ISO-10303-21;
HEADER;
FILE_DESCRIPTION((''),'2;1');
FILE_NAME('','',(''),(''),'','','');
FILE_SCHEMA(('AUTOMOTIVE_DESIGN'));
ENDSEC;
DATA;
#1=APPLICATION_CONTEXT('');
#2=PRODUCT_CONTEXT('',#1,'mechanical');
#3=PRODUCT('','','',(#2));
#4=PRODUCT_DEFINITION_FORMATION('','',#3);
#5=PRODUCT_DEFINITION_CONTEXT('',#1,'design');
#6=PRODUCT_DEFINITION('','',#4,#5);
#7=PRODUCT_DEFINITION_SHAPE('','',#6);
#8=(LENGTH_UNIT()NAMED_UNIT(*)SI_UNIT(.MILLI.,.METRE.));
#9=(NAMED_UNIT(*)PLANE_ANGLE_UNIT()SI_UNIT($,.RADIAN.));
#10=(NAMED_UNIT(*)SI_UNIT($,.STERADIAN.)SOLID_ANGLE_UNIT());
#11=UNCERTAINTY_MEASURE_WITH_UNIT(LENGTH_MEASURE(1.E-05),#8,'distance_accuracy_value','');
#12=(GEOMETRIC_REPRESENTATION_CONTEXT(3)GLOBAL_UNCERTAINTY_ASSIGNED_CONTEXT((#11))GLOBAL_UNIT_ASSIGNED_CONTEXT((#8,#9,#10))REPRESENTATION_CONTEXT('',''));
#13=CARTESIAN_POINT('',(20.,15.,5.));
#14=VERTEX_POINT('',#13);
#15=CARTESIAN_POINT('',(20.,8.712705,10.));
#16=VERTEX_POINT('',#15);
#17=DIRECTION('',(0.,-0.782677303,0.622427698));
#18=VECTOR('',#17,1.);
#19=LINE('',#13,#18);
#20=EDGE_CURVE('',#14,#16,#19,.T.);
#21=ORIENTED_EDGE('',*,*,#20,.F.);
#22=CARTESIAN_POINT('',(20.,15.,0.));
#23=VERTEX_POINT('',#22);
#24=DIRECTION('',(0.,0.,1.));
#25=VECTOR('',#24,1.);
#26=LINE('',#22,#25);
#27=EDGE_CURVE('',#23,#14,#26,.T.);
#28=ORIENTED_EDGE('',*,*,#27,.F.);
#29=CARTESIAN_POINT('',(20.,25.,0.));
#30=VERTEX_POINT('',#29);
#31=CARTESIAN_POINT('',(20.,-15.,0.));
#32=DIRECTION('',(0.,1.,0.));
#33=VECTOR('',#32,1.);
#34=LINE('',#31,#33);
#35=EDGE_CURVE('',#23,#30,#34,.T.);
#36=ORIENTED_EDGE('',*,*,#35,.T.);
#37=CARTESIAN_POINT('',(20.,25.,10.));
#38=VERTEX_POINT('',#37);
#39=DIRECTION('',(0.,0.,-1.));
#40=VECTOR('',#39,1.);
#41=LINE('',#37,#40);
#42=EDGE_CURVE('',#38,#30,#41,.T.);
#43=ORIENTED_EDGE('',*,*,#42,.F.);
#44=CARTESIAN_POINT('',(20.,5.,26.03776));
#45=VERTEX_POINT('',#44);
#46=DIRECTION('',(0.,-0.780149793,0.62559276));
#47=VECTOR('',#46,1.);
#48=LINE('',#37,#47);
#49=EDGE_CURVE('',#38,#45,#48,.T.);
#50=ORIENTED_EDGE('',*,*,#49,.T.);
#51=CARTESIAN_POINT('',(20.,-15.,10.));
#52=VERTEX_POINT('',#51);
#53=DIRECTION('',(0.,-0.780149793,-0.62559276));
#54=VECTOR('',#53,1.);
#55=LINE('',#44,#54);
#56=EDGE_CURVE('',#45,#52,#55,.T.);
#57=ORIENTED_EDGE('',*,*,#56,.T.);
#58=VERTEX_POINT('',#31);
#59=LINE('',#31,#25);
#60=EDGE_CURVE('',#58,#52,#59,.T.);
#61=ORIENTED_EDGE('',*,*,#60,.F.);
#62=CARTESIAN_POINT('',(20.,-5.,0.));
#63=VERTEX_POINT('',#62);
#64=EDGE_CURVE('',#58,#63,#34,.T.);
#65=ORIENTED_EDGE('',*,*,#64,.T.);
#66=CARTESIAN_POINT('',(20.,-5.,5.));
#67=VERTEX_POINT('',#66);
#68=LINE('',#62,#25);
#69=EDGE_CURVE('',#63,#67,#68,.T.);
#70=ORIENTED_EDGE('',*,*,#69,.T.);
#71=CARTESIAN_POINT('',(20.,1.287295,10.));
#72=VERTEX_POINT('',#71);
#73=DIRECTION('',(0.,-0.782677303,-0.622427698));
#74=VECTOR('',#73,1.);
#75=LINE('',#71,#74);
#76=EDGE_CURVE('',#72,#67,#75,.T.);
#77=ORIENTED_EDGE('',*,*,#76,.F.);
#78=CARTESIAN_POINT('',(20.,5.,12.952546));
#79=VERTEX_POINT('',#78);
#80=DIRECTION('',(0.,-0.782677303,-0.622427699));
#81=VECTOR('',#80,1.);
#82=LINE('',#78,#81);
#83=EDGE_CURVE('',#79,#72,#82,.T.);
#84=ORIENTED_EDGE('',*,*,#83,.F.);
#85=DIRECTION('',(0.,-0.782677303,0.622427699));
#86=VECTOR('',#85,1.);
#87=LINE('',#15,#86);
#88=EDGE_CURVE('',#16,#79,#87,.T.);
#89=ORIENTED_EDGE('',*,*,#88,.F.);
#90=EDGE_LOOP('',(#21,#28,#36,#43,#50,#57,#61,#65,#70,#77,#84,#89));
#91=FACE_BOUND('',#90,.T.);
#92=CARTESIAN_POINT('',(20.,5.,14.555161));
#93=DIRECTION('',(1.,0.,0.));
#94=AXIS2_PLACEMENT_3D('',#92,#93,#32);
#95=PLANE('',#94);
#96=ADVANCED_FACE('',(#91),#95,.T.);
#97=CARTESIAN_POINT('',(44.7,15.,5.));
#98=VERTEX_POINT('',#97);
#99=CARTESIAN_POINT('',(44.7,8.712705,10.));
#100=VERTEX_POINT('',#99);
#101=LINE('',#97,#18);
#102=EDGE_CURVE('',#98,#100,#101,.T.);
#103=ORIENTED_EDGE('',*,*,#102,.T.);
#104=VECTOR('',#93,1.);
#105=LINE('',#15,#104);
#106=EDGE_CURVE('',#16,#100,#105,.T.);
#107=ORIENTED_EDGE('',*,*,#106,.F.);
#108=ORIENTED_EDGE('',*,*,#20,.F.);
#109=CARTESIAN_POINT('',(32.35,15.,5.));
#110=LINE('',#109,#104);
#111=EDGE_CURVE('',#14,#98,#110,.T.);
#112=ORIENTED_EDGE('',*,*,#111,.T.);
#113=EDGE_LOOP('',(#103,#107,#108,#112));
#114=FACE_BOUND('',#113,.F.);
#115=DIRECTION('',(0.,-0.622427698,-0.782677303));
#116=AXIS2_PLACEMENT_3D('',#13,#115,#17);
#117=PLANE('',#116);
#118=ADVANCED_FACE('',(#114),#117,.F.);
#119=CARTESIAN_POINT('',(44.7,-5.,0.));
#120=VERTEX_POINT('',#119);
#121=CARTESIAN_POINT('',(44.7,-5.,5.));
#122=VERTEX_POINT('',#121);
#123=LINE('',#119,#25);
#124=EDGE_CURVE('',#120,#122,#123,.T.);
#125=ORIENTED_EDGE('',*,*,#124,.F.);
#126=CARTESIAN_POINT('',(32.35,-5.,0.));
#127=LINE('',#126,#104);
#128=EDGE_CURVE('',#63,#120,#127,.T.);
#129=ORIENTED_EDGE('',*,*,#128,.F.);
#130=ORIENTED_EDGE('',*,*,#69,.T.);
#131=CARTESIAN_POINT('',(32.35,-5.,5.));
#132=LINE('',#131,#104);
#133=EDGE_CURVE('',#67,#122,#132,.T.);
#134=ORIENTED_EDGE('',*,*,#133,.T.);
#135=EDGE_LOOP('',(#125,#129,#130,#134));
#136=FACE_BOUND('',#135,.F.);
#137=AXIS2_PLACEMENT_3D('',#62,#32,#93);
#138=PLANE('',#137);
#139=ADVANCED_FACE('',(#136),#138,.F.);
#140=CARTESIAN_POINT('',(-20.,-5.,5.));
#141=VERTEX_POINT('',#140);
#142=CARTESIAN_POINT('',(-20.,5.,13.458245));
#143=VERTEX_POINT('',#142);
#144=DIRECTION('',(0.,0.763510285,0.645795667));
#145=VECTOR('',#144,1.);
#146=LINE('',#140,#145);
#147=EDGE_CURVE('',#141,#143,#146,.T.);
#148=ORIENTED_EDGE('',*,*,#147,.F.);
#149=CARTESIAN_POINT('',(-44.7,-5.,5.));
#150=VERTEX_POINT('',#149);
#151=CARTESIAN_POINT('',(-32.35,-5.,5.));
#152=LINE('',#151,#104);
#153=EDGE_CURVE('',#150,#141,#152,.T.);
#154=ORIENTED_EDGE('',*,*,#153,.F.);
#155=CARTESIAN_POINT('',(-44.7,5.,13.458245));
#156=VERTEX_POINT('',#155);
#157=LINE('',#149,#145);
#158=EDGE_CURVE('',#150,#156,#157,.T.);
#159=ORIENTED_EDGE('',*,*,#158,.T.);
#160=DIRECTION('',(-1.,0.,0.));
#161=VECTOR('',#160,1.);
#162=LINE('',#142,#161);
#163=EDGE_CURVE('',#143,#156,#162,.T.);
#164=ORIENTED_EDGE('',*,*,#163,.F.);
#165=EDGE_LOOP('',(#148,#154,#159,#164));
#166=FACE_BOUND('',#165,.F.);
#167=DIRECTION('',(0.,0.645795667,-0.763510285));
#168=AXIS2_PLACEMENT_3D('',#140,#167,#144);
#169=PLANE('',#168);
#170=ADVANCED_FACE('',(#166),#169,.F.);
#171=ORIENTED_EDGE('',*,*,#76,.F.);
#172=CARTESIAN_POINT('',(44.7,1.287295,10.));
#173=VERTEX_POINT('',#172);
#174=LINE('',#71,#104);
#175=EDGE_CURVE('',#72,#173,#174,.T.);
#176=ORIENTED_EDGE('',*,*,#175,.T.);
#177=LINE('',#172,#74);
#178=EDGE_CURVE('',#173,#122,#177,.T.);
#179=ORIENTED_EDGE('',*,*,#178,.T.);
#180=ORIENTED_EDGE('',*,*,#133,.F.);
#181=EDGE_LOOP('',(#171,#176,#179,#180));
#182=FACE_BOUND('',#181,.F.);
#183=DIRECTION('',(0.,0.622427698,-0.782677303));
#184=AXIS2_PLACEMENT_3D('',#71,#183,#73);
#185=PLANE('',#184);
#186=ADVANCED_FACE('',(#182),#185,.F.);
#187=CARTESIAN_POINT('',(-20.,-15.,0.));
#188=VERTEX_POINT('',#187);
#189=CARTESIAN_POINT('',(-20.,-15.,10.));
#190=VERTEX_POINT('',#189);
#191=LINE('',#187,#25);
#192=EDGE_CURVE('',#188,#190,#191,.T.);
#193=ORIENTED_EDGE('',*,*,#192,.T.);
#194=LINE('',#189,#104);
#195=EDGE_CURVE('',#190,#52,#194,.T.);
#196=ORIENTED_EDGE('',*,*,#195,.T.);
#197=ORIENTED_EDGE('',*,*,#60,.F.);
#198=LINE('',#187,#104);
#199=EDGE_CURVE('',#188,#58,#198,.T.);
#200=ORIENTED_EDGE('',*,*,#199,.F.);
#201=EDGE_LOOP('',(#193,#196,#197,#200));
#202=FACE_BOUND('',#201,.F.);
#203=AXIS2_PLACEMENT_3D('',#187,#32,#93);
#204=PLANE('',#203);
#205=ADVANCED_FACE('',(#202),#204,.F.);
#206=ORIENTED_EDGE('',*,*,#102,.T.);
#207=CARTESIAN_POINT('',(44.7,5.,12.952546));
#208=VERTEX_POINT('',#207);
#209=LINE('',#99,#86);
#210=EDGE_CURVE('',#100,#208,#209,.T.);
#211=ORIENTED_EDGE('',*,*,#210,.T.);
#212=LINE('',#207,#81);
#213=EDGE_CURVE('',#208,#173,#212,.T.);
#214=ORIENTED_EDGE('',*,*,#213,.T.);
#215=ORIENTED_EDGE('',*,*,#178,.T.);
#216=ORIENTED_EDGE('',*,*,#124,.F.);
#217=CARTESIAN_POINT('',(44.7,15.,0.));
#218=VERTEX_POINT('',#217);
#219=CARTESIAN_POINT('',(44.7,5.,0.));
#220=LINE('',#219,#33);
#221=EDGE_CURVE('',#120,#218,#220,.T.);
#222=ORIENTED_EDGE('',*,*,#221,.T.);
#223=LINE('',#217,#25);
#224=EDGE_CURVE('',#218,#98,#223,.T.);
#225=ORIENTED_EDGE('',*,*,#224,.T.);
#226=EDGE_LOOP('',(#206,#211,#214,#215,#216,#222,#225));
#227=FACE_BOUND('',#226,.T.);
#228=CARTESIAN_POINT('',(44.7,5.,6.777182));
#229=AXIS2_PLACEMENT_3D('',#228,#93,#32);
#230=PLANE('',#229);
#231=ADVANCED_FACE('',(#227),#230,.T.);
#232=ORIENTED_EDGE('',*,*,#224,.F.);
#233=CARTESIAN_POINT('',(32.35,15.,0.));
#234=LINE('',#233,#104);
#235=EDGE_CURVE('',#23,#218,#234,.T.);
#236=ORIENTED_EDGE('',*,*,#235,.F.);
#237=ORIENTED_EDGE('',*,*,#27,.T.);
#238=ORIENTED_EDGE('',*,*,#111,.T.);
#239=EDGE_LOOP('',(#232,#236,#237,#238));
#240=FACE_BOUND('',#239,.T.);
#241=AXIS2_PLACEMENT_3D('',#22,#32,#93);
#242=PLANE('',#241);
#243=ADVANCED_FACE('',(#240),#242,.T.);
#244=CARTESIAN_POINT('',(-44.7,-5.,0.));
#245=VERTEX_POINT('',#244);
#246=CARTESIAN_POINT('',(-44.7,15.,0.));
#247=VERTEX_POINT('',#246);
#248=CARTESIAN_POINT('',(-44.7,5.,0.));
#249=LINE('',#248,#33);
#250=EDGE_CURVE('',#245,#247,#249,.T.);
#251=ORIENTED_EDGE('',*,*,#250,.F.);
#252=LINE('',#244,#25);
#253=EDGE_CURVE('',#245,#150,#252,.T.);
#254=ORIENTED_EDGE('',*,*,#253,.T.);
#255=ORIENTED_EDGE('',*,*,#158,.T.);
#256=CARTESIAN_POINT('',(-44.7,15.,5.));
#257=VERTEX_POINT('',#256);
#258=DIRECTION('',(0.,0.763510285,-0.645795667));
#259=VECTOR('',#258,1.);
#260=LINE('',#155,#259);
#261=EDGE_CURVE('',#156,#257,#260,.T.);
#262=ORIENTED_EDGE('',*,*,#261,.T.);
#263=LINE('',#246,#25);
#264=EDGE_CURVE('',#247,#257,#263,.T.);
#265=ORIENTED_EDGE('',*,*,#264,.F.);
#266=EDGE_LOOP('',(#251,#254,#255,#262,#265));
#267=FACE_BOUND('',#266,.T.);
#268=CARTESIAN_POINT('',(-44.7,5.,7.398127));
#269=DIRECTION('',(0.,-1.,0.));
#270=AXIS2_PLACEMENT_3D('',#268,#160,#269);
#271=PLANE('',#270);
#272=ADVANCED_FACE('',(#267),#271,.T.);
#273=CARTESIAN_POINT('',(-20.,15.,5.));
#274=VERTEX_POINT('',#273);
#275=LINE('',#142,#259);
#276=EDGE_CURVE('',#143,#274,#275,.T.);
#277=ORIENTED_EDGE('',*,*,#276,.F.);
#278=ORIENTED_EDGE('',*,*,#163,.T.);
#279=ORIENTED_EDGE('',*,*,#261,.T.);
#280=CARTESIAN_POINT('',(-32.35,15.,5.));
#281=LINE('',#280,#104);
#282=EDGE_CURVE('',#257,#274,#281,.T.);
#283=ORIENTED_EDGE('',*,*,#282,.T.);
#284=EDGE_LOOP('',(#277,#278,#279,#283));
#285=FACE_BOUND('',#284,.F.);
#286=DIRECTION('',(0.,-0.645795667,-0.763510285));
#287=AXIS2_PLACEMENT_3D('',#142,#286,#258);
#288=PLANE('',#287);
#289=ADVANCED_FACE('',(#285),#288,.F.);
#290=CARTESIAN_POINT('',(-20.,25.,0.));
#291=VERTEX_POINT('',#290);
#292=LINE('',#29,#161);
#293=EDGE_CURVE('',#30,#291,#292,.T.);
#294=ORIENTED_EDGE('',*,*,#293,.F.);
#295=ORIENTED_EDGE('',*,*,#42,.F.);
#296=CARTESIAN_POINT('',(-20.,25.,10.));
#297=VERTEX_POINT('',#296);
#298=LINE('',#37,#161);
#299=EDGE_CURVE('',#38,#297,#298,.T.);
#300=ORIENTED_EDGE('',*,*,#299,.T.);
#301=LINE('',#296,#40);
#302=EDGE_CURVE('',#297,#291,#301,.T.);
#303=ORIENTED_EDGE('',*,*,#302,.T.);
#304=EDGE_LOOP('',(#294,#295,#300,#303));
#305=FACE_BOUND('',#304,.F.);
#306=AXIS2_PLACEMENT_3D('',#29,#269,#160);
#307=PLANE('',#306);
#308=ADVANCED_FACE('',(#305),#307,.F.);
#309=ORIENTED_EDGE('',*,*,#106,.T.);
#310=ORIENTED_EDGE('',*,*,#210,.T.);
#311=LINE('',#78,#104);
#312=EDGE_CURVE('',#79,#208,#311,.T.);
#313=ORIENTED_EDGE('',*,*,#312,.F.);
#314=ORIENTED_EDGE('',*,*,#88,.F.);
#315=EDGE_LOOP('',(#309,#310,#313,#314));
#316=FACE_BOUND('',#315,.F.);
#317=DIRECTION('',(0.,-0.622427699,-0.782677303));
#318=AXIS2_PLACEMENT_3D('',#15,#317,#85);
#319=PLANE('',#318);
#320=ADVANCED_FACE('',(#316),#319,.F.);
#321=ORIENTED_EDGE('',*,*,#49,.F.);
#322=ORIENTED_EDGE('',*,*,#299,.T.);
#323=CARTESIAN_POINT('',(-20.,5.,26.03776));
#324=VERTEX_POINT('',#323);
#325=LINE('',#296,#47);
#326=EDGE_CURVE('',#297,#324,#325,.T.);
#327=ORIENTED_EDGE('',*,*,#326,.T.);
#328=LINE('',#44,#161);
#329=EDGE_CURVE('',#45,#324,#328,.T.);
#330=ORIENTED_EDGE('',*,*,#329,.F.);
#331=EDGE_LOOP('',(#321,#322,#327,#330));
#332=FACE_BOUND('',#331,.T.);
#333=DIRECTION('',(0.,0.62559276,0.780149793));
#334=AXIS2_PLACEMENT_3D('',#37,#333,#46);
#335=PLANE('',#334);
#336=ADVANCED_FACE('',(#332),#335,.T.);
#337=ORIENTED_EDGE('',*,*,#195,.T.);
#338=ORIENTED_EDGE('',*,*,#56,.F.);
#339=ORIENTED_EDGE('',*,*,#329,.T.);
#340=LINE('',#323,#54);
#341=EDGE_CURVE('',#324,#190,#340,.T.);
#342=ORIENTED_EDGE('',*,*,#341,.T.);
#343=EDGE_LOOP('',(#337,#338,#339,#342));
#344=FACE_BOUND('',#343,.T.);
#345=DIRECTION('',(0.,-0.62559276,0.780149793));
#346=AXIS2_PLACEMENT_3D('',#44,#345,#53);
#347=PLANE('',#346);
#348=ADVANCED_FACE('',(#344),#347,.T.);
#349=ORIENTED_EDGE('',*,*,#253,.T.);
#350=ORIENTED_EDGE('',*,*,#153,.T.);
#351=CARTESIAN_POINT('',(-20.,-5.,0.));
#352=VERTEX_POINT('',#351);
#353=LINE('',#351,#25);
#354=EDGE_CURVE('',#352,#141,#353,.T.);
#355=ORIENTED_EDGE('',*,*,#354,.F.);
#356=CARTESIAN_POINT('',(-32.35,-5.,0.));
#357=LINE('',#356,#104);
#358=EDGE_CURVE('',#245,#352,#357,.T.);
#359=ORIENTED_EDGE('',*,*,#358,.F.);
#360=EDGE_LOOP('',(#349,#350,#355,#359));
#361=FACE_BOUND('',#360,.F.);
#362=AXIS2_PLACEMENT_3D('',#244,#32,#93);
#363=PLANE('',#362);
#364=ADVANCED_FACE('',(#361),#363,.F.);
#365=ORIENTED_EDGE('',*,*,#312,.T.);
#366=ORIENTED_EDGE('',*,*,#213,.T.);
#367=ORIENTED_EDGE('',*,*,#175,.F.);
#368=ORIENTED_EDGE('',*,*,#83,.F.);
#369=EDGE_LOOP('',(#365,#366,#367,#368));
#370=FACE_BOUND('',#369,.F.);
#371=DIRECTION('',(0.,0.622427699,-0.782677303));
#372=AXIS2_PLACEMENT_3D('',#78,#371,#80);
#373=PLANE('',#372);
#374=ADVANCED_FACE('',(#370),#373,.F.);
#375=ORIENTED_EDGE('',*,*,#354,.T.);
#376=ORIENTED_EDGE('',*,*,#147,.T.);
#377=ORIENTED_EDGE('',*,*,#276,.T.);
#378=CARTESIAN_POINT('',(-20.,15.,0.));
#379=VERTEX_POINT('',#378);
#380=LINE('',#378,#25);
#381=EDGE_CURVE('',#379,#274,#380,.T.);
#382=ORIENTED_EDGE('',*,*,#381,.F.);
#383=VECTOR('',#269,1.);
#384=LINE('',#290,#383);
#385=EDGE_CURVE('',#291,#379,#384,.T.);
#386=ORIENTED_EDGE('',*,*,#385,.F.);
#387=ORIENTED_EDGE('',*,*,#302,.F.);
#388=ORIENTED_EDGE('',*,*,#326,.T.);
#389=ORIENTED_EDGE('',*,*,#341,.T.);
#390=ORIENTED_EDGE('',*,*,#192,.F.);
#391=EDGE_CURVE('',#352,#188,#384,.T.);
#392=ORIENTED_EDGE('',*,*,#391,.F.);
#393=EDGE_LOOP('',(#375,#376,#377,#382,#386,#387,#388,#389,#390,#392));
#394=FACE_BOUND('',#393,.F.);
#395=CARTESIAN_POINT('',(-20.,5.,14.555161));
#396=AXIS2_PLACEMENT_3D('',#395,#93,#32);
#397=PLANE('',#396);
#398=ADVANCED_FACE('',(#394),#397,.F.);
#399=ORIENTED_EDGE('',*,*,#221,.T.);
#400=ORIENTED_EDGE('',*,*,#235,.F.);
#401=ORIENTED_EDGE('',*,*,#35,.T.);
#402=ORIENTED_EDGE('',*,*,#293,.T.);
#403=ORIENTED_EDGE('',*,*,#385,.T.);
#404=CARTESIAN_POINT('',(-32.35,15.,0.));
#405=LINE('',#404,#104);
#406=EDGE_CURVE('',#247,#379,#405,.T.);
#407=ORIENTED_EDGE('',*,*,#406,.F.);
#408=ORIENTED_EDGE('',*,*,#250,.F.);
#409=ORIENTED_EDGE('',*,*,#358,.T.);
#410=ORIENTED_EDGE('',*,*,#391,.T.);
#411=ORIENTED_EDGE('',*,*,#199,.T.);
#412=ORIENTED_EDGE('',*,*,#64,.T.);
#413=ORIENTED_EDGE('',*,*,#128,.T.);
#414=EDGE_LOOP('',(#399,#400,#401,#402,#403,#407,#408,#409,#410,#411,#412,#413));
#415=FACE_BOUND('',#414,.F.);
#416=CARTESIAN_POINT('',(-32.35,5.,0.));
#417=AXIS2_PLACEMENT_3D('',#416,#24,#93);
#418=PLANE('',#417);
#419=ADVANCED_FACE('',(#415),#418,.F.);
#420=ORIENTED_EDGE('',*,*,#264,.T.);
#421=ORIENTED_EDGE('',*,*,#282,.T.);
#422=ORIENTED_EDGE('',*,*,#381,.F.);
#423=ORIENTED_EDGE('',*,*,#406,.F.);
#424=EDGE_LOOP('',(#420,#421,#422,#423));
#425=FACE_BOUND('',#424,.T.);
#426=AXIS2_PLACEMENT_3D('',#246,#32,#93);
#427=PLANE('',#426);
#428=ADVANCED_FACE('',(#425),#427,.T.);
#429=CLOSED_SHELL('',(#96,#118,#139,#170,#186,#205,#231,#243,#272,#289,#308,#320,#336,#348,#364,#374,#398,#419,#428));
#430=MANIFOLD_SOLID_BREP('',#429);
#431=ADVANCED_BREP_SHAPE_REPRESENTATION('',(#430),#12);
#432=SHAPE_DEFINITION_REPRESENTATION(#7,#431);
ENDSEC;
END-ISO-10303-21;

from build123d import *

# Parameters (mm, degrees)
F1_DEPTH = 10
F0_W     = 24.7
F0_H     = 20
F2_DEPTH = 5
F5_DEPTH = 24.7
F6_DEPTH = 40
F9_DEPTH = 24.7


with BuildPart() as f1:
    # F0 (on Top) → F1 (new body)
    with BuildSketch(Plane.XY):
        Polygon((-20, 25), (-20, 15), (-20, -5), (-20, -15), (20, -15), (20, -5), (20, 15), (20, 25), align=None)
    extrude(amount=F1_DEPTH)

    # F0 (on Top) → F2 (join)
    with BuildSketch(Plane.XY):
        with Locations((-32.35, 5)):
            Rectangle(F0_W, F0_H)
        Polygon((-20, 25), (-20, 15), (-20, -5), (-20, -15), (20, -15), (20, -5), (20, 15), (20, 25), align=None)
        with Locations((32.35, 5)):
            Rectangle(F0_W, F0_H)
    extrude(amount=F2_DEPTH)

    # F4 (on offset) → F5 (join)
    with BuildSketch(Plane.YZ.offset(20)):
        Polygon((-5, 5), (15, 5), (8.7127050693, 10), (1.2872949307, 10), align=None)
        Polygon((1.2872949307, 10), (8.7127050693, 10), (5, 12.9525456578), align=None)
    extrude(amount=F5_DEPTH)

    # F4 (on offset) → F6 (join)
    with BuildSketch(Plane.YZ.offset(20)):
        Polygon((5, 12.9525456578), (8.7127050693, 10), (25, 10), (5, 26.0377600789), (-15, 10), (1.2872949307, 10), align=None)
        Polygon((1.2872949307, 10), (8.7127050693, 10), (5, 12.9525456578), align=None)
    extrude(amount=-F6_DEPTH)

    # F8 (on offset) → F9 (join)
    with BuildSketch(Plane(origin=(-20, 0, 0), x_dir=(0, -1, 0), z_dir=(-1, 0, 0))):
        Polygon((-15, 5), (5, 5), (-5, 13.4582445025), align=None)
    extrude(amount=F9_DEPTH)


solid = f1.part
